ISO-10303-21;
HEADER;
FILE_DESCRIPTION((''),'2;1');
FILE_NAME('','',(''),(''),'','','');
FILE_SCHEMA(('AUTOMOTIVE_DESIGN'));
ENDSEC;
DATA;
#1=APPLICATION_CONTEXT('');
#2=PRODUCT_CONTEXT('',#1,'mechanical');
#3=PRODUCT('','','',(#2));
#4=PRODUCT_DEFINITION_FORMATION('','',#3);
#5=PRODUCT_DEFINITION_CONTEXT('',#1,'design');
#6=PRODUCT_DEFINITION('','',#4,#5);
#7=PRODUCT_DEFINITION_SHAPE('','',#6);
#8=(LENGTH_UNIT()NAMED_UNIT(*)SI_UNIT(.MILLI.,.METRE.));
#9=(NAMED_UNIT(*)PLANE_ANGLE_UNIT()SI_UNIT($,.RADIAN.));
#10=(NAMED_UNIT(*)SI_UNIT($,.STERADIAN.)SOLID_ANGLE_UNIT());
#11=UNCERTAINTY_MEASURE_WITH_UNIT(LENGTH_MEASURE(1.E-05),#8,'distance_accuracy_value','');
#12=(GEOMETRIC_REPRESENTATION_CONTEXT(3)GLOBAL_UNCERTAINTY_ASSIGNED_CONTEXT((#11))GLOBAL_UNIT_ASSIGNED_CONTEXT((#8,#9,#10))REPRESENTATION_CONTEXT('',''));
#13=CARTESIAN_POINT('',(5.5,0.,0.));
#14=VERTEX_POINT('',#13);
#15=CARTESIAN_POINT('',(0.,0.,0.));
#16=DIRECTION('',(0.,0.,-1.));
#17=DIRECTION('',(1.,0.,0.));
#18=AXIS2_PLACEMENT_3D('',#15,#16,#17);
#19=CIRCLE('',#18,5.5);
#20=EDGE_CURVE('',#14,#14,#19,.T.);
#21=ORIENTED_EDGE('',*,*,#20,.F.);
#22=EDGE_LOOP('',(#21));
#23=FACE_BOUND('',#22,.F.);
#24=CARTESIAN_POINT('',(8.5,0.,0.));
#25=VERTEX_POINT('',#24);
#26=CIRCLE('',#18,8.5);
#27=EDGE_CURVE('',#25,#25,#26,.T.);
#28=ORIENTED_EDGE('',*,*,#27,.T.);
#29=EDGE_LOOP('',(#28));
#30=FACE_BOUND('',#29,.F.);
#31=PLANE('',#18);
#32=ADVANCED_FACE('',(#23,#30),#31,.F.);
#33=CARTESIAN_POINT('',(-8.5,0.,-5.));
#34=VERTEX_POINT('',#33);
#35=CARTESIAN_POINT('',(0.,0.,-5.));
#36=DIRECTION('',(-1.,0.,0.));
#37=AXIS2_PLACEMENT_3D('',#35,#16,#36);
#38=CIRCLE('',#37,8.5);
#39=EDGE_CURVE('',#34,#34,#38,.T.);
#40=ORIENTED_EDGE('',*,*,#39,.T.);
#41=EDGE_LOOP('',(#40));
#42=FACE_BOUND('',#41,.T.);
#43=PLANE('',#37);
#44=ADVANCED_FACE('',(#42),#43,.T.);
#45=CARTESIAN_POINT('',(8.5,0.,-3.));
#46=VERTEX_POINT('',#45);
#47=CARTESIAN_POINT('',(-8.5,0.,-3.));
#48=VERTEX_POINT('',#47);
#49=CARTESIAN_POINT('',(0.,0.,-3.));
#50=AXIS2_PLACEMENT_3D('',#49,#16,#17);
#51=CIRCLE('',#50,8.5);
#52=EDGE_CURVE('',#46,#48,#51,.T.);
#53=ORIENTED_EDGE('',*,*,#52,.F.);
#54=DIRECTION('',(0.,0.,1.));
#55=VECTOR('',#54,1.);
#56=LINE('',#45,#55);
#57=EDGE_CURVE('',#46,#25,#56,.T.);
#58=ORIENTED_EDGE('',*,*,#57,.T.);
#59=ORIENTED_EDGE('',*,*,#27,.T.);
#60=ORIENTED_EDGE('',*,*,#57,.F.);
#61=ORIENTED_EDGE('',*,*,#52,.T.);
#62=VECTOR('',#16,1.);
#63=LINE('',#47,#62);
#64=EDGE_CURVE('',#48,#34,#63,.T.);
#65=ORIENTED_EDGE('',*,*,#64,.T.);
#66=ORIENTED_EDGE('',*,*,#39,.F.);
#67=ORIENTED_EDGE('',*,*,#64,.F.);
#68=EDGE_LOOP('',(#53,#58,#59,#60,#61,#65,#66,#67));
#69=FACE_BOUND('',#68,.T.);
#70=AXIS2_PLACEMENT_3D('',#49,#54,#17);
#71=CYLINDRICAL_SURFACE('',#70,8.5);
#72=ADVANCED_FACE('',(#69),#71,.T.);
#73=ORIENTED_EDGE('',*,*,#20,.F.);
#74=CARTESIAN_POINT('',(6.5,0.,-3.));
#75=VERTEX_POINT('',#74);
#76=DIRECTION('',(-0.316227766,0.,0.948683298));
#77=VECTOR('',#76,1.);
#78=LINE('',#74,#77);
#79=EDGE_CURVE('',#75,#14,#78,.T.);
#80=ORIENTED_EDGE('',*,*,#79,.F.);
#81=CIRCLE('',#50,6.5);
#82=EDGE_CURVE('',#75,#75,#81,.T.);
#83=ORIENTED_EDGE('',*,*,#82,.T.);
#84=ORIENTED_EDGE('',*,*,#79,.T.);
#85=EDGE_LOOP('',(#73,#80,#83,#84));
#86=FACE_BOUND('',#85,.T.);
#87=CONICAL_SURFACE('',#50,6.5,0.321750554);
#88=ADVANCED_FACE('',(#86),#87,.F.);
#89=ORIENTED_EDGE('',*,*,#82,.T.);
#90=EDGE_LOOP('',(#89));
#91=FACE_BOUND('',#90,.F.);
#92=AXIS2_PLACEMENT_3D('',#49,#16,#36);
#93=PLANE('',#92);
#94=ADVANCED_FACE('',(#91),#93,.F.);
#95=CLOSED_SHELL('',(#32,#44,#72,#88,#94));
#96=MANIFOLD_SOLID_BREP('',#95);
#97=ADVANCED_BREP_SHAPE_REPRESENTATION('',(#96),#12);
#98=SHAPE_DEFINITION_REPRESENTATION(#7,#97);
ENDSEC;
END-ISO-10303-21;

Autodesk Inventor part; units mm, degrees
ref_plane "YZ Plane" through (0, 0, 0) normal (1, 0, 0) x (0, 1, 0)
ref_plane "XZ Plane" through (0, 0, 0) normal (0, 1, 0) x (-1, 0, 0)
ref_plane "XY Plane" through (0, 0, 0) normal (0, 0, 1) x (1, 0, 0)
sketch "Sketch1" plane through (0, 0, 0) normal (0, 1, 0) x (-1, 0, 0)
  line L0 (0, 0) -> (-5.5, 0)
  line L1 (-6.5, -3) -> (-5.5, 0)
  line L2 (-6.5, -3) -> (-8.5, -3)
  line L3 (-8.5, -3) -> (-8.5, 0)
  line L4 (-8.5, 0) -> (-5.5, 0)
  line L5 (0, 0) -> (0, -4.1468)
  dimension "d11" = 2
revolve "Revolution1" add sketch "Sketch1" angle 360 about axis through (0, 0, 0) along (0, 0, -1)
sketch "Sketch3" plane through (0, 0, -3) normal (0, 0, -1) x (-1, 0, 0)
  circle A0 centre (0, 0) radius 8.5 projected
extrude "Extrusion3" add sketch "Sketch3" along normal blind 2
properties part number "circle-reed"
